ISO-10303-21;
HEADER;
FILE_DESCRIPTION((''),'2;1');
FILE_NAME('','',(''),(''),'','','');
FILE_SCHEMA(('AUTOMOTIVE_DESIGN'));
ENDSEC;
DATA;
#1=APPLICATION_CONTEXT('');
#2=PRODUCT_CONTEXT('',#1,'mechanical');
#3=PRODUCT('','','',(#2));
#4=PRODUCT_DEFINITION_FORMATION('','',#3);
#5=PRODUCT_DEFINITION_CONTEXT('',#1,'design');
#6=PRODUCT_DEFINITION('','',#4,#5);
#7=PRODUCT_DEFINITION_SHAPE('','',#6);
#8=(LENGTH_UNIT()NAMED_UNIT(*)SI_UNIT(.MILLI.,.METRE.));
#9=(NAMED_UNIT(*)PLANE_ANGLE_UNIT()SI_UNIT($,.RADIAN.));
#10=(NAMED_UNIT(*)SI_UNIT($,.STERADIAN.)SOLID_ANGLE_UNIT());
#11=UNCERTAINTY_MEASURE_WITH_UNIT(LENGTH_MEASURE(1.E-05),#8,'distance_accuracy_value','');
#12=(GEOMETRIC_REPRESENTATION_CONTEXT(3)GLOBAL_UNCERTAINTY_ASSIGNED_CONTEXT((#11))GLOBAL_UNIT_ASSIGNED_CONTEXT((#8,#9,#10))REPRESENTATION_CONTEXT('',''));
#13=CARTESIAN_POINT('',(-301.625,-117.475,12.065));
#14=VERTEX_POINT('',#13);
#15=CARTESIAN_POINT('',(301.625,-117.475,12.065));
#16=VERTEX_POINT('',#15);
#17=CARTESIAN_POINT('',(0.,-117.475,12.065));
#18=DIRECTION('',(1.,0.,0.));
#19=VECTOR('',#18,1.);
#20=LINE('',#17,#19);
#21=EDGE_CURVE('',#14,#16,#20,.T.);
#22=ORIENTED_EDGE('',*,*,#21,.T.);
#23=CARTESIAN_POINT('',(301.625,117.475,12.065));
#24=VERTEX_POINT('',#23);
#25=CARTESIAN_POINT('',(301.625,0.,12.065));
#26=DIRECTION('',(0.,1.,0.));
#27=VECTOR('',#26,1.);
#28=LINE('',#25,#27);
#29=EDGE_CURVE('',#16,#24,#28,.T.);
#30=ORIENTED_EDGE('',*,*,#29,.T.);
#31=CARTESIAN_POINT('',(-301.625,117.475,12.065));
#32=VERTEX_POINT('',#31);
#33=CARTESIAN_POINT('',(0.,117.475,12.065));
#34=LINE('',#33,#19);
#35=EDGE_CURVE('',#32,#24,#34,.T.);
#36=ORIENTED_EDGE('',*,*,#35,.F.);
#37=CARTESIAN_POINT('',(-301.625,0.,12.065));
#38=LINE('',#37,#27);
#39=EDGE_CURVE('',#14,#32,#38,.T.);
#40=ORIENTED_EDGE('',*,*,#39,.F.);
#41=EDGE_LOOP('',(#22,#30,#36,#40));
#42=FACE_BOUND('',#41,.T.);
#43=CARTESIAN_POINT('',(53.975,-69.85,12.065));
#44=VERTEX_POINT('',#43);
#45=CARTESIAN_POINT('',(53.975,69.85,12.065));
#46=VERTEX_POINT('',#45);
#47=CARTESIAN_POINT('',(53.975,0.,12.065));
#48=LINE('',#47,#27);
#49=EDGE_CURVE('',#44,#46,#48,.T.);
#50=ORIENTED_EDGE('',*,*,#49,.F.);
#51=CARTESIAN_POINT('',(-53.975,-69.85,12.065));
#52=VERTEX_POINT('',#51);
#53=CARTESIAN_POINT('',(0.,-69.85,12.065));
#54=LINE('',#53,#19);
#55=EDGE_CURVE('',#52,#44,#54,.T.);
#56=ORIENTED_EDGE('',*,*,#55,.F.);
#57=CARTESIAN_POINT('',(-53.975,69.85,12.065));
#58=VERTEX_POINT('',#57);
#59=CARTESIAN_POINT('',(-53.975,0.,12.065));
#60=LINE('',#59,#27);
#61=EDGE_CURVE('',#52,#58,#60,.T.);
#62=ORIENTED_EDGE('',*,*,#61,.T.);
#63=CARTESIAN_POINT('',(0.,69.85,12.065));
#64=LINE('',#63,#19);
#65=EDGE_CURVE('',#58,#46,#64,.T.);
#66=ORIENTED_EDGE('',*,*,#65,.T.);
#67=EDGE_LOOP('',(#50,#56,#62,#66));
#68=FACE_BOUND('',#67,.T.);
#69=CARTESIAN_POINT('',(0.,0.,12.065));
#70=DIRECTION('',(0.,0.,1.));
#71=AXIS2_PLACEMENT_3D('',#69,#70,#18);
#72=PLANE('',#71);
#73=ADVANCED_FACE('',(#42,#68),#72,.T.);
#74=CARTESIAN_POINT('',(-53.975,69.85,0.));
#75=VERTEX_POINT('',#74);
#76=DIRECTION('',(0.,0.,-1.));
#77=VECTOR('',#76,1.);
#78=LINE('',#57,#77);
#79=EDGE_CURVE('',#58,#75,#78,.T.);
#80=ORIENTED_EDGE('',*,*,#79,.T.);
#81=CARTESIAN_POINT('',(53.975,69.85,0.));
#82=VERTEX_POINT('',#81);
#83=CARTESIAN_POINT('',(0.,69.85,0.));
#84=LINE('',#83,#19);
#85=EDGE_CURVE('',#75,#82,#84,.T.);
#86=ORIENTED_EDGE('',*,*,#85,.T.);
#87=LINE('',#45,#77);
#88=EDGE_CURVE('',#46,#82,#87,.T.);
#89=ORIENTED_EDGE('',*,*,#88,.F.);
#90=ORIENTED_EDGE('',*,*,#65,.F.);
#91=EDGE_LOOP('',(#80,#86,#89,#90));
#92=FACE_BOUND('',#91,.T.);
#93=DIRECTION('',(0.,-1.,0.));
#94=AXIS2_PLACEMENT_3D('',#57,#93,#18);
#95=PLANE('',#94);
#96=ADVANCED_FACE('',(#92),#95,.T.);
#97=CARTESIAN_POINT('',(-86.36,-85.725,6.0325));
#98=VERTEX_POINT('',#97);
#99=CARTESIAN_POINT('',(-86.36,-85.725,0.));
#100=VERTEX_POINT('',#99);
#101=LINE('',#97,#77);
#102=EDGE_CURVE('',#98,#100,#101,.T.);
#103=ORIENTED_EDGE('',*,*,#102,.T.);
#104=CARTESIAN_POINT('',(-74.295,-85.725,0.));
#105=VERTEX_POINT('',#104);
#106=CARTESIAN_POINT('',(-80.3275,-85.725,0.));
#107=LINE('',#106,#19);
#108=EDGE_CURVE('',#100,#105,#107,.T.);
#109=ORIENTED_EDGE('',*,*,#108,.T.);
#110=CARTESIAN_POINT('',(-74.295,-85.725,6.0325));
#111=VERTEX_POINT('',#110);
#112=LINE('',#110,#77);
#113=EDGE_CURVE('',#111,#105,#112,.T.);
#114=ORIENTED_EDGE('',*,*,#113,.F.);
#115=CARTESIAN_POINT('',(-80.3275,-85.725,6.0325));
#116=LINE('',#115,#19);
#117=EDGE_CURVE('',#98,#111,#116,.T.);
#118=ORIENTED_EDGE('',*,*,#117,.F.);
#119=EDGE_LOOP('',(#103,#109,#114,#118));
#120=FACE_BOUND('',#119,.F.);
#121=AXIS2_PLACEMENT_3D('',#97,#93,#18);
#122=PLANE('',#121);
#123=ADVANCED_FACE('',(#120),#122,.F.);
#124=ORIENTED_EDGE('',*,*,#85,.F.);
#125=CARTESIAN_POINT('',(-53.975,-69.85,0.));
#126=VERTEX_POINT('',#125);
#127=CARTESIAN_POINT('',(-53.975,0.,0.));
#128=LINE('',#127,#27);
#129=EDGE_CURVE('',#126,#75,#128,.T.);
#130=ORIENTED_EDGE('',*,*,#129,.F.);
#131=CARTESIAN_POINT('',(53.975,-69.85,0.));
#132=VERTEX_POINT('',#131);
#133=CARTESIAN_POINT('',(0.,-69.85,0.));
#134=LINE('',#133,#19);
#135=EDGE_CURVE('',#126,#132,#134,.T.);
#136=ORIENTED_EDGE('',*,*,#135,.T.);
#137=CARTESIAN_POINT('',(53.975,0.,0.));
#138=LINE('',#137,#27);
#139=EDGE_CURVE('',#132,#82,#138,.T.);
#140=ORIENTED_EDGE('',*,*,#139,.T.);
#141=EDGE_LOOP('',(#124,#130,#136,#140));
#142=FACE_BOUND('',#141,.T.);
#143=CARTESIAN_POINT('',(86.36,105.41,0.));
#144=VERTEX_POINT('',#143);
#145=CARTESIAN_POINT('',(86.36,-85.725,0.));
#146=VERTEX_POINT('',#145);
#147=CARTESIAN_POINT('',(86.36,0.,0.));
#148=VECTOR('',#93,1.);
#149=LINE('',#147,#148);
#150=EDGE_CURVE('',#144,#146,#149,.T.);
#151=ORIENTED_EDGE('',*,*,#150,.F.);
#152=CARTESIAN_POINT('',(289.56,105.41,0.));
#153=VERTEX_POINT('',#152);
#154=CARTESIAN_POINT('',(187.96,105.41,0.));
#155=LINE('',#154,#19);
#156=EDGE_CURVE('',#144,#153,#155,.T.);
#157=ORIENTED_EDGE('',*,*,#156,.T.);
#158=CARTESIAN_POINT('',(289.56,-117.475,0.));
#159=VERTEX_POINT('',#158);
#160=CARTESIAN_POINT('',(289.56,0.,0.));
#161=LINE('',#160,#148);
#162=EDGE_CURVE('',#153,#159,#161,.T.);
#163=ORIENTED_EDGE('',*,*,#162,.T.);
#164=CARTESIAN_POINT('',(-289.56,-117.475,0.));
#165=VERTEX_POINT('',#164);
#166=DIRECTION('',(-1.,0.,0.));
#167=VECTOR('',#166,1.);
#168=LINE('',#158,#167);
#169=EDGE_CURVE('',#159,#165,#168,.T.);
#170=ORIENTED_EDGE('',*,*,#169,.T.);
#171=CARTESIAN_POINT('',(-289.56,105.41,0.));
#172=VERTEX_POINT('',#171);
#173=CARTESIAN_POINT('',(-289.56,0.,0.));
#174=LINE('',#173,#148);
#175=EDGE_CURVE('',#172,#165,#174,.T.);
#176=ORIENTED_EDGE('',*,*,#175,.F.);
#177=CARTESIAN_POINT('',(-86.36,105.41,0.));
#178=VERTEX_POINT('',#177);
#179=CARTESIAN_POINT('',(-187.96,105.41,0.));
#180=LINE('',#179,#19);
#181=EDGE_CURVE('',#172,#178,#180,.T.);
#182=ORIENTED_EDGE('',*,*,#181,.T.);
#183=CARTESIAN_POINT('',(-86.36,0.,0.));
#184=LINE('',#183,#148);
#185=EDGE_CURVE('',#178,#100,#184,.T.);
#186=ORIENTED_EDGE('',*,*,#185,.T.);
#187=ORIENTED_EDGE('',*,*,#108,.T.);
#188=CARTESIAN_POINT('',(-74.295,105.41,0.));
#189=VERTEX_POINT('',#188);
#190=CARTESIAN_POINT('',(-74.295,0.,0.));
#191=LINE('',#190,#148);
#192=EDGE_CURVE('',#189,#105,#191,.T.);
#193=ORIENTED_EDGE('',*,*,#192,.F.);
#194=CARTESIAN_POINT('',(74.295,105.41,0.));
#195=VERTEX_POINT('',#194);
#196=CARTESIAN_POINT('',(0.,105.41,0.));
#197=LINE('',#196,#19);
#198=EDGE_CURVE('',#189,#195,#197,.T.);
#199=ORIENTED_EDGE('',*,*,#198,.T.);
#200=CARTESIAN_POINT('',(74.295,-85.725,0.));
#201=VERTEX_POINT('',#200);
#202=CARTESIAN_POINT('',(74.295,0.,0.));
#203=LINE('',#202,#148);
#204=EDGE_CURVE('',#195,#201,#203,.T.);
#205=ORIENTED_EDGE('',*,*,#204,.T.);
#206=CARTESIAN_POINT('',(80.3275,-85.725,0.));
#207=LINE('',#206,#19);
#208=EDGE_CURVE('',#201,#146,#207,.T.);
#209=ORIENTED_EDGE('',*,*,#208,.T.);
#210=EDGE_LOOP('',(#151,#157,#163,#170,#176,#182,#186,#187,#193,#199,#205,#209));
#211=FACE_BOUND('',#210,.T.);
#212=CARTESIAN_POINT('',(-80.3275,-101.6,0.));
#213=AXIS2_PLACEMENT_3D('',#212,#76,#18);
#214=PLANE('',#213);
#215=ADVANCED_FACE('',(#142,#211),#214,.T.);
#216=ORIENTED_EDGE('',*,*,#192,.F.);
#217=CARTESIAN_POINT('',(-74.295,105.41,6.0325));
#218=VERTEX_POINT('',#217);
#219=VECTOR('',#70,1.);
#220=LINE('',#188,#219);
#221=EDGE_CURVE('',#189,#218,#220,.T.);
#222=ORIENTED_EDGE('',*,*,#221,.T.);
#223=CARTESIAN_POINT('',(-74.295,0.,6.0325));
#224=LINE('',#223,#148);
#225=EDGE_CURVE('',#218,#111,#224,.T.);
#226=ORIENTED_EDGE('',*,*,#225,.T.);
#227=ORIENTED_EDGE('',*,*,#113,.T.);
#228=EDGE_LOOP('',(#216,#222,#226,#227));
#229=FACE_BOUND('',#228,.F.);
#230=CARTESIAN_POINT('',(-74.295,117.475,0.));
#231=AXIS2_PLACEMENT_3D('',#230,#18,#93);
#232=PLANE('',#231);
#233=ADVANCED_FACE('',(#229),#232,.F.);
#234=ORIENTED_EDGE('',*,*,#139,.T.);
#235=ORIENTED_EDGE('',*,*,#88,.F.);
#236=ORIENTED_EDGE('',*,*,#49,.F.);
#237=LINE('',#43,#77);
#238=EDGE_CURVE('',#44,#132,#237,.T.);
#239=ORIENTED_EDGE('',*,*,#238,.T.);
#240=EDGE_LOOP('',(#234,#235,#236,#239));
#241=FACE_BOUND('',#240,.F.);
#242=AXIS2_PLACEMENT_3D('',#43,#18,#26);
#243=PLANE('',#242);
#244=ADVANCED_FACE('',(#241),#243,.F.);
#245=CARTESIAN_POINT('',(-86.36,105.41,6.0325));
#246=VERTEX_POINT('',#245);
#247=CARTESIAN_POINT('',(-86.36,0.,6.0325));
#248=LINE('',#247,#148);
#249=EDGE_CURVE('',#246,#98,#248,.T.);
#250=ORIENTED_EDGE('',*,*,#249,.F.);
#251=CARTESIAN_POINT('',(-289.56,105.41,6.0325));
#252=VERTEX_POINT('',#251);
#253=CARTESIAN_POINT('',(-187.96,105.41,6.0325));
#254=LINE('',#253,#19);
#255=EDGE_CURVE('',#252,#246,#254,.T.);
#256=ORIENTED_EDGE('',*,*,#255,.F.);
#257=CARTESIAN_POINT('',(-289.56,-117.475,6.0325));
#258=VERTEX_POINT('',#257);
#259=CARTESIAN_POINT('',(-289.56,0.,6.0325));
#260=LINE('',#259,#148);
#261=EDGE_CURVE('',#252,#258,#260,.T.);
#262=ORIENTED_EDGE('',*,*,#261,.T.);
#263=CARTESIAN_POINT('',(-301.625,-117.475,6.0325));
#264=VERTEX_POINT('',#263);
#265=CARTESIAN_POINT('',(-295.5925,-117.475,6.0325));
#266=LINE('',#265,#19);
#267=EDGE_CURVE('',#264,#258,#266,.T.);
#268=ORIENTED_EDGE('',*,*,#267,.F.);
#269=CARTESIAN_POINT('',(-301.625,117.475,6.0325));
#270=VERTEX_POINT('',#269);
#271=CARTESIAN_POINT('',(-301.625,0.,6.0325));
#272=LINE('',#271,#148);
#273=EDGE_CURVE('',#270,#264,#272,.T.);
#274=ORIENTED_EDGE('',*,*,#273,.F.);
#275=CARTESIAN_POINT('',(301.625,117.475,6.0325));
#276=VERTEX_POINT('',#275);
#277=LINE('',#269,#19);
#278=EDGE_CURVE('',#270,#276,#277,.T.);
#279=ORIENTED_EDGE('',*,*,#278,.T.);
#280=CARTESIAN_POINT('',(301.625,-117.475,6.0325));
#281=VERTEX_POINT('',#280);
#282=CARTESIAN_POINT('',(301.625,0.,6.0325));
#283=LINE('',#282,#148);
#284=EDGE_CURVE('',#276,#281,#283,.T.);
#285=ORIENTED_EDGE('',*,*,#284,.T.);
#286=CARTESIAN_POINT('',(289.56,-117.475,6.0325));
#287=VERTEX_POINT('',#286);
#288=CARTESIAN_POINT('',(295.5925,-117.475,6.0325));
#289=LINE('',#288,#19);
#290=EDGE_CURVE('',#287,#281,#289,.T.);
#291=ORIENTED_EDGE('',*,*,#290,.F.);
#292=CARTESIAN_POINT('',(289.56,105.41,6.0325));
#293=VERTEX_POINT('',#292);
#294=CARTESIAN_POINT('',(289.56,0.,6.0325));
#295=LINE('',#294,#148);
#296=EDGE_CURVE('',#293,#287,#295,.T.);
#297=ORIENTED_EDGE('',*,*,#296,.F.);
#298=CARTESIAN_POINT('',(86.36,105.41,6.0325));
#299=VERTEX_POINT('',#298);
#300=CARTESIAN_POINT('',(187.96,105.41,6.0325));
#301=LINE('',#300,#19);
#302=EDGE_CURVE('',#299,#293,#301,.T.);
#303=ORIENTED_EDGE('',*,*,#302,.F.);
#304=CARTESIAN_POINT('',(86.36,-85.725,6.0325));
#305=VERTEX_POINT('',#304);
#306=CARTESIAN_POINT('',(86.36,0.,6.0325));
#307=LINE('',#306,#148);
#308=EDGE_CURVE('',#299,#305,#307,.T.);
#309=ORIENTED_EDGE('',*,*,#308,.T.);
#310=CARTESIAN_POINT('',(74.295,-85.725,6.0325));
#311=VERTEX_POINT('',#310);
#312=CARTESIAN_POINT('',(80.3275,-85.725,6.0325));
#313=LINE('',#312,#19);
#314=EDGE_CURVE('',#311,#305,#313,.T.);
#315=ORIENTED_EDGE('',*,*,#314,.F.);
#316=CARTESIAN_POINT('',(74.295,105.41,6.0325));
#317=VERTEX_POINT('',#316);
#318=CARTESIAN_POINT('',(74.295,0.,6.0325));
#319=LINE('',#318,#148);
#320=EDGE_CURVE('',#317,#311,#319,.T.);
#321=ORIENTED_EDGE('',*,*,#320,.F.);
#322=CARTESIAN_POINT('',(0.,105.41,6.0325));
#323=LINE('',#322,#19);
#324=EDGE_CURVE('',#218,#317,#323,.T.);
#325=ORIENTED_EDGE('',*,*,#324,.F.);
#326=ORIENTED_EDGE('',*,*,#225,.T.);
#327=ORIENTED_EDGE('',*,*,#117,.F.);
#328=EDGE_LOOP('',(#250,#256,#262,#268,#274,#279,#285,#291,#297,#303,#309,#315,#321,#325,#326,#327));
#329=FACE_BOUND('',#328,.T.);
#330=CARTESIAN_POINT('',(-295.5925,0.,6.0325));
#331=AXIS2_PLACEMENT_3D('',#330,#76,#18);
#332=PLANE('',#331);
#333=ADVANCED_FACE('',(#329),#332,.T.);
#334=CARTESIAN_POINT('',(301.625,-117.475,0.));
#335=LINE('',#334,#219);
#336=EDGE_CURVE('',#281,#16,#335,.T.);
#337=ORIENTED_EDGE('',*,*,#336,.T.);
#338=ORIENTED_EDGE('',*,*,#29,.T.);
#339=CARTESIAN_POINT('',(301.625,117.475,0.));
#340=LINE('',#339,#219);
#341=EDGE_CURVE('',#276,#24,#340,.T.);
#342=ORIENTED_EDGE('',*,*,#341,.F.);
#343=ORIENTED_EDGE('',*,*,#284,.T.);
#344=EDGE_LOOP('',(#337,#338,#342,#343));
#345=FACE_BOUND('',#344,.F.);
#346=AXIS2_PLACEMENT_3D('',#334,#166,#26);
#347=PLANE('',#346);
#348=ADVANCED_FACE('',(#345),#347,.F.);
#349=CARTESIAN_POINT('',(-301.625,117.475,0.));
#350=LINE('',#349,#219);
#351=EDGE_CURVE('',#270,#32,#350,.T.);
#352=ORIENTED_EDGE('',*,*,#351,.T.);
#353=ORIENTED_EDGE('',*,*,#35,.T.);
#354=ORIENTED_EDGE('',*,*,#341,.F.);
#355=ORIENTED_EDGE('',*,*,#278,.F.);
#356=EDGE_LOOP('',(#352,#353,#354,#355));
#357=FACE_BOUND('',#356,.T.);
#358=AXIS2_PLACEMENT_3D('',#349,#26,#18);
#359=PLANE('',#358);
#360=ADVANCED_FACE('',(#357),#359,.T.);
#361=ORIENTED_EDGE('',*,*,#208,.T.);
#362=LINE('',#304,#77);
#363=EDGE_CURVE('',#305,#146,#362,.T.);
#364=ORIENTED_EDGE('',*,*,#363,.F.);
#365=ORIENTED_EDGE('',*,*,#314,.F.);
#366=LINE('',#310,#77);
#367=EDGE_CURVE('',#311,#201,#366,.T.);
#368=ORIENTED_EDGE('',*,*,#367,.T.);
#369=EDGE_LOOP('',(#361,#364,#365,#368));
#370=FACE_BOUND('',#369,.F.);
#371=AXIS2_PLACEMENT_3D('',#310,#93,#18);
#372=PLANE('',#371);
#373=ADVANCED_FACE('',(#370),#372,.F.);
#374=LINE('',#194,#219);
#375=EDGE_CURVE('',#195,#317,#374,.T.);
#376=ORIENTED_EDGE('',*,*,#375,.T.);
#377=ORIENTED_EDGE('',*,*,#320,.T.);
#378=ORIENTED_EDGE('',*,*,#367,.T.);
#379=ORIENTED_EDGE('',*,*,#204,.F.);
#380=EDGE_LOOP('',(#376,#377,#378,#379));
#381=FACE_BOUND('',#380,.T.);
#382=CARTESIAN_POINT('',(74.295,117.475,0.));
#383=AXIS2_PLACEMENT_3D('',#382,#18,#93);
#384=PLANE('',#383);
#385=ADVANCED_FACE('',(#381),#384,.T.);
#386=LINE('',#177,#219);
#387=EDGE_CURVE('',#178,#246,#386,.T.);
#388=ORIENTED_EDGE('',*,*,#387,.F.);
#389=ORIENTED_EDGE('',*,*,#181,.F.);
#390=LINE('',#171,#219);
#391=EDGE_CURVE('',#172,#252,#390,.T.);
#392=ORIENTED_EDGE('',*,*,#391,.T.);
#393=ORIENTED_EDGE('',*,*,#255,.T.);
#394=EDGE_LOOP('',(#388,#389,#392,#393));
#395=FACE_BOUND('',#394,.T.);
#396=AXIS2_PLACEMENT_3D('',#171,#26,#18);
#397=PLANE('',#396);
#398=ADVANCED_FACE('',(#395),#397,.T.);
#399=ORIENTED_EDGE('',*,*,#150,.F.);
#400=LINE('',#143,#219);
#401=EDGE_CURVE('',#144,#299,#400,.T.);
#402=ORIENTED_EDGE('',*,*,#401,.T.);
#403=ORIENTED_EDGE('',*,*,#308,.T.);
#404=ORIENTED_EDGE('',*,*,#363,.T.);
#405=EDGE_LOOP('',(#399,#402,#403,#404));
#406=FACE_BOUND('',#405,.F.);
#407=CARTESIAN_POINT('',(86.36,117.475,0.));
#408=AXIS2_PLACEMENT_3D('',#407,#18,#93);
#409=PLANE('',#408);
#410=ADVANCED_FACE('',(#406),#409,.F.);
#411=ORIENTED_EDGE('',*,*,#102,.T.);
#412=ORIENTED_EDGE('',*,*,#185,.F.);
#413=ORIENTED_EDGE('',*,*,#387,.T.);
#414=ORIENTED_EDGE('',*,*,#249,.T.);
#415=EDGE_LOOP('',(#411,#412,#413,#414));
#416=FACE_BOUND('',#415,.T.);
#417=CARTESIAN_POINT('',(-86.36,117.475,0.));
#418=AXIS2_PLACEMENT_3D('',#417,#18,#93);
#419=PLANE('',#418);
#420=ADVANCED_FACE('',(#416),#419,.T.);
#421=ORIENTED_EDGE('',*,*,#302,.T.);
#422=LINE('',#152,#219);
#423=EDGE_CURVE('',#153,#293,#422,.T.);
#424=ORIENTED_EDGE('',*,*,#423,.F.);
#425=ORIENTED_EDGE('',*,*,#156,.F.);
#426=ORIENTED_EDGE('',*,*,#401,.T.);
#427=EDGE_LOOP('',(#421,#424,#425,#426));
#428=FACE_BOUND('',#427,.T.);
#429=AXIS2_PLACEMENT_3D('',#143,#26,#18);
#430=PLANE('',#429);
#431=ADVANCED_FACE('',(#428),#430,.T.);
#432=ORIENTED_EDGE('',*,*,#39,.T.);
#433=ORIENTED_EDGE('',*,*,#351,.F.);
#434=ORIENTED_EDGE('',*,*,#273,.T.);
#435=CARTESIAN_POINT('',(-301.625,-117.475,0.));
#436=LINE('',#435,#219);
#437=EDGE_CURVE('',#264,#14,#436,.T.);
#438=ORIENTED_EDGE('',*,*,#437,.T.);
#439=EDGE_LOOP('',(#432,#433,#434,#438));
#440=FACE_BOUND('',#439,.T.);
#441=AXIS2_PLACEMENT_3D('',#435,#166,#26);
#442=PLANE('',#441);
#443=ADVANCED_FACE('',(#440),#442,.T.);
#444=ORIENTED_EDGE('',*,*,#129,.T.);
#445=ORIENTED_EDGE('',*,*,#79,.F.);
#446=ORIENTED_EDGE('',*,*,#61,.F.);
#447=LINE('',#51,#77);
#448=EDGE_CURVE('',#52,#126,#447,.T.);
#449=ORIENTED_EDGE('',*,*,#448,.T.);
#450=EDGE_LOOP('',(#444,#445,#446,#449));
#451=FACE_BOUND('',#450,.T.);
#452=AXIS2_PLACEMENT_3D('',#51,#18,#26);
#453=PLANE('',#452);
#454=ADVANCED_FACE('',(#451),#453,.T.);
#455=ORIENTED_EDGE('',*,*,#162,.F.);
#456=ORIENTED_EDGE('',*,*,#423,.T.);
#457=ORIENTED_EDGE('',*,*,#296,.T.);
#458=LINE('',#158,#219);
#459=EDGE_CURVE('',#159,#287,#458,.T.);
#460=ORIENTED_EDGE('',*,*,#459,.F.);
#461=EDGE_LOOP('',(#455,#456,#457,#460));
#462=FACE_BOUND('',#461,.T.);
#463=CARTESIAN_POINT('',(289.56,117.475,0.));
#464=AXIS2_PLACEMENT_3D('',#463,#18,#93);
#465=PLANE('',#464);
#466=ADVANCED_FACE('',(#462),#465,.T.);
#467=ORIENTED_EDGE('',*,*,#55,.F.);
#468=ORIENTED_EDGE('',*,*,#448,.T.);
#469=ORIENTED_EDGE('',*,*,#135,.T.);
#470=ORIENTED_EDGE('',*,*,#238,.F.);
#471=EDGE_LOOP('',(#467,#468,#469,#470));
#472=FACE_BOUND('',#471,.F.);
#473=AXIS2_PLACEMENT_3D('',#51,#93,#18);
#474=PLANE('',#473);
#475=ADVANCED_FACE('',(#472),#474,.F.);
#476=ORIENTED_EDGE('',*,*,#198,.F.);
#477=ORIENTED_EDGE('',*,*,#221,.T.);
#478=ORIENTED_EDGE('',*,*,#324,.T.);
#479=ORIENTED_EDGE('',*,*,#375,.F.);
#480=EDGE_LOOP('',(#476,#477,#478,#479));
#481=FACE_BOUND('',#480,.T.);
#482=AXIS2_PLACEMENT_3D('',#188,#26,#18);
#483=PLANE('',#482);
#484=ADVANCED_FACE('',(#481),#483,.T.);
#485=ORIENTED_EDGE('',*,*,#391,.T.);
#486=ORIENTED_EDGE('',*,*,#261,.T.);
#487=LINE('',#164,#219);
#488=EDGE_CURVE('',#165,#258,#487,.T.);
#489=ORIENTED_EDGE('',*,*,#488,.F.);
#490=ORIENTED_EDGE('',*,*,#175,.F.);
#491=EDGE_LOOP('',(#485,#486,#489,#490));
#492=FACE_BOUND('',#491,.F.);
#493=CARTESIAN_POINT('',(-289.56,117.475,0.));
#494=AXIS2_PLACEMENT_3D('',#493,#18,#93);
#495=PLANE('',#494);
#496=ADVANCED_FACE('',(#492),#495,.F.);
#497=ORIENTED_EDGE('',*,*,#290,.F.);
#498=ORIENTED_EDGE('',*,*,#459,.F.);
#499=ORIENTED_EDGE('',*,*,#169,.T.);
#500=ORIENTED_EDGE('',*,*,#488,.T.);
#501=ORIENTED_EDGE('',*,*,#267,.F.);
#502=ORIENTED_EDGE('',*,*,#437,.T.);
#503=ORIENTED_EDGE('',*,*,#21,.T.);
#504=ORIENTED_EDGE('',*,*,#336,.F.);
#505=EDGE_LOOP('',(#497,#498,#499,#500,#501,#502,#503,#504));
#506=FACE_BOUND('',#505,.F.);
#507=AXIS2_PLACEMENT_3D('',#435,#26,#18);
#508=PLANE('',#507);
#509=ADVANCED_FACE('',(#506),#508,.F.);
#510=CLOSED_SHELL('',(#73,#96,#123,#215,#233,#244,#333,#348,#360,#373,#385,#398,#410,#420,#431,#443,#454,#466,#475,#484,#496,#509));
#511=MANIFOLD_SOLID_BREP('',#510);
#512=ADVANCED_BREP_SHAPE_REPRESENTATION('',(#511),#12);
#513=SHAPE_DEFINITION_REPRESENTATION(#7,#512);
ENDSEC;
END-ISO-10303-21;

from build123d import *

# Parameters (mm, degrees)
F1_W      = 603.25
F1_H      = 234.95
F2_DEPTH  = 12.065
F3_W      = 12.065
F3_H      = 234.95
F4_DEPTH  = 6.0325
F5_W      = 12.065
F5_H      = 234.95
F6_DEPTH  = 6.0325
F7_W      = 12.065
F7_H      = 234.95
F8_DEPTH  = 6.0325
F9_W      = 12.065
F9_H      = 234.95
F10_DEPTH = 6.0325
F11_W     = 203.2
F11_H     = 12.065
F14_DEPTH = 6.0325
F12_W     = 148.59
F12_H     = 12.065
F15_DEPTH = 6.0325
F13_W     = 203.2
F13_H     = 12.065
F16_DEPTH = 6.0325
F17_W     = 12.065
F17_H     = 31.75
F18_DEPTH = 6.0325
F19_W     = 12.065
F19_H     = 31.75
F20_DEPTH = 6.0325
F21_W     = 107.95
F21_H     = 139.7
F22_DEPTH = 12.065


# Not quite as in the source:
# - a variable given as a bare number and used for a length is read in inches; the dataset says mm whatever the document's units were


with BuildPart() as f2:
    # F1 (on Top) → F2 (new body)
    with BuildSketch(Plane.XY):
        Rectangle(F1_W, F1_H)
    extrude(amount=F2_DEPTH)

    # F3 (on face) → F4 (cut)
    with BuildSketch(Plane(origin=(0, 0, 0), x_dir=(1, 0, 0), z_dir=(0, 0, -1))):
        with Locations((-295.5925, 0)):
            Rectangle(F3_W, F3_H)
    extrude(amount=-F4_DEPTH, mode=Mode.SUBTRACT)

    # F5 (on face) → F6 (cut)
    with BuildSketch(Plane(origin=(0, 0, 0), x_dir=(1, 0, 0), z_dir=(0, 0, -1))):
        with Locations((295.5925, 0)):
            Rectangle(F5_W, F5_H)
    extrude(amount=-F6_DEPTH, mode=Mode.SUBTRACT)

    # F7 (on face) → F8 (cut)
    with BuildSketch(Plane(origin=(0, 0, 0), x_dir=(1, 0, 0), z_dir=(0, 0, -1))):
        with Locations((80.3275, 0)):
            Rectangle(F7_W, F7_H)
    extrude(amount=-F8_DEPTH, mode=Mode.SUBTRACT)

    # F9 (on face) → F10 (cut)
    with BuildSketch(Plane(origin=(0, 0, 0), x_dir=(1, 0, 0), z_dir=(0, 0, -1))):
        with Locations((-80.3275, 0)):
            Rectangle(F9_W, F9_H)
    extrude(amount=-F10_DEPTH, mode=Mode.SUBTRACT)

    # F11 (on face) → F14 (cut)
    with BuildSketch(Plane(origin=(0, 0, 0), x_dir=(1, 0, 0), z_dir=(0, 0, -1))):
        with Locations((187.96, -111.4425)):
            Rectangle(F11_W, F11_H)
    extrude(amount=-F14_DEPTH, mode=Mode.SUBTRACT)

    # F12 (on face) → F15 (cut)
    with BuildSketch(Plane(origin=(0, 0, 0), x_dir=(1, 0, 0), z_dir=(0, 0, -1))):
        with Locations((0, -111.4425)):
            Rectangle(F12_W, F12_H)
    extrude(amount=-F15_DEPTH, mode=Mode.SUBTRACT)

    # F13 (on face) → F16 (cut)
    with BuildSketch(Plane(origin=(0, 0, 0), x_dir=(1, 0, 0), z_dir=(0, 0, -1))):
        with Locations((-187.96, -111.4425)):
            Rectangle(F13_W, F13_H)
    extrude(amount=-F16_DEPTH, mode=Mode.SUBTRACT)

    # F17 (on face) → F18 (join)
    with BuildSketch(Plane(origin=(0, 0, 6.0325), x_dir=(1, 0, 0), z_dir=(0, 0, -1))):
        with Locations((80.3275, 101.6)):
            Rectangle(F17_W, F17_H)
    extrude(amount=F18_DEPTH)

    # F19 (on face) → F20 (join)
    with BuildSketch(Plane(origin=(0, 0, 6.0325), x_dir=(1, 0, 0), z_dir=(0, 0, -1))):
        with Locations((-80.3275, 101.6)):
            Rectangle(F19_W, F19_H)
    extrude(amount=F20_DEPTH)

    # F21 (on face) → F22 (cut)
    with BuildSketch(Plane.XY.offset(12.065)):
        Rectangle(F21_W, F21_H)
    extrude(amount=-F22_DEPTH, mode=Mode.SUBTRACT)


solid = f2.part
